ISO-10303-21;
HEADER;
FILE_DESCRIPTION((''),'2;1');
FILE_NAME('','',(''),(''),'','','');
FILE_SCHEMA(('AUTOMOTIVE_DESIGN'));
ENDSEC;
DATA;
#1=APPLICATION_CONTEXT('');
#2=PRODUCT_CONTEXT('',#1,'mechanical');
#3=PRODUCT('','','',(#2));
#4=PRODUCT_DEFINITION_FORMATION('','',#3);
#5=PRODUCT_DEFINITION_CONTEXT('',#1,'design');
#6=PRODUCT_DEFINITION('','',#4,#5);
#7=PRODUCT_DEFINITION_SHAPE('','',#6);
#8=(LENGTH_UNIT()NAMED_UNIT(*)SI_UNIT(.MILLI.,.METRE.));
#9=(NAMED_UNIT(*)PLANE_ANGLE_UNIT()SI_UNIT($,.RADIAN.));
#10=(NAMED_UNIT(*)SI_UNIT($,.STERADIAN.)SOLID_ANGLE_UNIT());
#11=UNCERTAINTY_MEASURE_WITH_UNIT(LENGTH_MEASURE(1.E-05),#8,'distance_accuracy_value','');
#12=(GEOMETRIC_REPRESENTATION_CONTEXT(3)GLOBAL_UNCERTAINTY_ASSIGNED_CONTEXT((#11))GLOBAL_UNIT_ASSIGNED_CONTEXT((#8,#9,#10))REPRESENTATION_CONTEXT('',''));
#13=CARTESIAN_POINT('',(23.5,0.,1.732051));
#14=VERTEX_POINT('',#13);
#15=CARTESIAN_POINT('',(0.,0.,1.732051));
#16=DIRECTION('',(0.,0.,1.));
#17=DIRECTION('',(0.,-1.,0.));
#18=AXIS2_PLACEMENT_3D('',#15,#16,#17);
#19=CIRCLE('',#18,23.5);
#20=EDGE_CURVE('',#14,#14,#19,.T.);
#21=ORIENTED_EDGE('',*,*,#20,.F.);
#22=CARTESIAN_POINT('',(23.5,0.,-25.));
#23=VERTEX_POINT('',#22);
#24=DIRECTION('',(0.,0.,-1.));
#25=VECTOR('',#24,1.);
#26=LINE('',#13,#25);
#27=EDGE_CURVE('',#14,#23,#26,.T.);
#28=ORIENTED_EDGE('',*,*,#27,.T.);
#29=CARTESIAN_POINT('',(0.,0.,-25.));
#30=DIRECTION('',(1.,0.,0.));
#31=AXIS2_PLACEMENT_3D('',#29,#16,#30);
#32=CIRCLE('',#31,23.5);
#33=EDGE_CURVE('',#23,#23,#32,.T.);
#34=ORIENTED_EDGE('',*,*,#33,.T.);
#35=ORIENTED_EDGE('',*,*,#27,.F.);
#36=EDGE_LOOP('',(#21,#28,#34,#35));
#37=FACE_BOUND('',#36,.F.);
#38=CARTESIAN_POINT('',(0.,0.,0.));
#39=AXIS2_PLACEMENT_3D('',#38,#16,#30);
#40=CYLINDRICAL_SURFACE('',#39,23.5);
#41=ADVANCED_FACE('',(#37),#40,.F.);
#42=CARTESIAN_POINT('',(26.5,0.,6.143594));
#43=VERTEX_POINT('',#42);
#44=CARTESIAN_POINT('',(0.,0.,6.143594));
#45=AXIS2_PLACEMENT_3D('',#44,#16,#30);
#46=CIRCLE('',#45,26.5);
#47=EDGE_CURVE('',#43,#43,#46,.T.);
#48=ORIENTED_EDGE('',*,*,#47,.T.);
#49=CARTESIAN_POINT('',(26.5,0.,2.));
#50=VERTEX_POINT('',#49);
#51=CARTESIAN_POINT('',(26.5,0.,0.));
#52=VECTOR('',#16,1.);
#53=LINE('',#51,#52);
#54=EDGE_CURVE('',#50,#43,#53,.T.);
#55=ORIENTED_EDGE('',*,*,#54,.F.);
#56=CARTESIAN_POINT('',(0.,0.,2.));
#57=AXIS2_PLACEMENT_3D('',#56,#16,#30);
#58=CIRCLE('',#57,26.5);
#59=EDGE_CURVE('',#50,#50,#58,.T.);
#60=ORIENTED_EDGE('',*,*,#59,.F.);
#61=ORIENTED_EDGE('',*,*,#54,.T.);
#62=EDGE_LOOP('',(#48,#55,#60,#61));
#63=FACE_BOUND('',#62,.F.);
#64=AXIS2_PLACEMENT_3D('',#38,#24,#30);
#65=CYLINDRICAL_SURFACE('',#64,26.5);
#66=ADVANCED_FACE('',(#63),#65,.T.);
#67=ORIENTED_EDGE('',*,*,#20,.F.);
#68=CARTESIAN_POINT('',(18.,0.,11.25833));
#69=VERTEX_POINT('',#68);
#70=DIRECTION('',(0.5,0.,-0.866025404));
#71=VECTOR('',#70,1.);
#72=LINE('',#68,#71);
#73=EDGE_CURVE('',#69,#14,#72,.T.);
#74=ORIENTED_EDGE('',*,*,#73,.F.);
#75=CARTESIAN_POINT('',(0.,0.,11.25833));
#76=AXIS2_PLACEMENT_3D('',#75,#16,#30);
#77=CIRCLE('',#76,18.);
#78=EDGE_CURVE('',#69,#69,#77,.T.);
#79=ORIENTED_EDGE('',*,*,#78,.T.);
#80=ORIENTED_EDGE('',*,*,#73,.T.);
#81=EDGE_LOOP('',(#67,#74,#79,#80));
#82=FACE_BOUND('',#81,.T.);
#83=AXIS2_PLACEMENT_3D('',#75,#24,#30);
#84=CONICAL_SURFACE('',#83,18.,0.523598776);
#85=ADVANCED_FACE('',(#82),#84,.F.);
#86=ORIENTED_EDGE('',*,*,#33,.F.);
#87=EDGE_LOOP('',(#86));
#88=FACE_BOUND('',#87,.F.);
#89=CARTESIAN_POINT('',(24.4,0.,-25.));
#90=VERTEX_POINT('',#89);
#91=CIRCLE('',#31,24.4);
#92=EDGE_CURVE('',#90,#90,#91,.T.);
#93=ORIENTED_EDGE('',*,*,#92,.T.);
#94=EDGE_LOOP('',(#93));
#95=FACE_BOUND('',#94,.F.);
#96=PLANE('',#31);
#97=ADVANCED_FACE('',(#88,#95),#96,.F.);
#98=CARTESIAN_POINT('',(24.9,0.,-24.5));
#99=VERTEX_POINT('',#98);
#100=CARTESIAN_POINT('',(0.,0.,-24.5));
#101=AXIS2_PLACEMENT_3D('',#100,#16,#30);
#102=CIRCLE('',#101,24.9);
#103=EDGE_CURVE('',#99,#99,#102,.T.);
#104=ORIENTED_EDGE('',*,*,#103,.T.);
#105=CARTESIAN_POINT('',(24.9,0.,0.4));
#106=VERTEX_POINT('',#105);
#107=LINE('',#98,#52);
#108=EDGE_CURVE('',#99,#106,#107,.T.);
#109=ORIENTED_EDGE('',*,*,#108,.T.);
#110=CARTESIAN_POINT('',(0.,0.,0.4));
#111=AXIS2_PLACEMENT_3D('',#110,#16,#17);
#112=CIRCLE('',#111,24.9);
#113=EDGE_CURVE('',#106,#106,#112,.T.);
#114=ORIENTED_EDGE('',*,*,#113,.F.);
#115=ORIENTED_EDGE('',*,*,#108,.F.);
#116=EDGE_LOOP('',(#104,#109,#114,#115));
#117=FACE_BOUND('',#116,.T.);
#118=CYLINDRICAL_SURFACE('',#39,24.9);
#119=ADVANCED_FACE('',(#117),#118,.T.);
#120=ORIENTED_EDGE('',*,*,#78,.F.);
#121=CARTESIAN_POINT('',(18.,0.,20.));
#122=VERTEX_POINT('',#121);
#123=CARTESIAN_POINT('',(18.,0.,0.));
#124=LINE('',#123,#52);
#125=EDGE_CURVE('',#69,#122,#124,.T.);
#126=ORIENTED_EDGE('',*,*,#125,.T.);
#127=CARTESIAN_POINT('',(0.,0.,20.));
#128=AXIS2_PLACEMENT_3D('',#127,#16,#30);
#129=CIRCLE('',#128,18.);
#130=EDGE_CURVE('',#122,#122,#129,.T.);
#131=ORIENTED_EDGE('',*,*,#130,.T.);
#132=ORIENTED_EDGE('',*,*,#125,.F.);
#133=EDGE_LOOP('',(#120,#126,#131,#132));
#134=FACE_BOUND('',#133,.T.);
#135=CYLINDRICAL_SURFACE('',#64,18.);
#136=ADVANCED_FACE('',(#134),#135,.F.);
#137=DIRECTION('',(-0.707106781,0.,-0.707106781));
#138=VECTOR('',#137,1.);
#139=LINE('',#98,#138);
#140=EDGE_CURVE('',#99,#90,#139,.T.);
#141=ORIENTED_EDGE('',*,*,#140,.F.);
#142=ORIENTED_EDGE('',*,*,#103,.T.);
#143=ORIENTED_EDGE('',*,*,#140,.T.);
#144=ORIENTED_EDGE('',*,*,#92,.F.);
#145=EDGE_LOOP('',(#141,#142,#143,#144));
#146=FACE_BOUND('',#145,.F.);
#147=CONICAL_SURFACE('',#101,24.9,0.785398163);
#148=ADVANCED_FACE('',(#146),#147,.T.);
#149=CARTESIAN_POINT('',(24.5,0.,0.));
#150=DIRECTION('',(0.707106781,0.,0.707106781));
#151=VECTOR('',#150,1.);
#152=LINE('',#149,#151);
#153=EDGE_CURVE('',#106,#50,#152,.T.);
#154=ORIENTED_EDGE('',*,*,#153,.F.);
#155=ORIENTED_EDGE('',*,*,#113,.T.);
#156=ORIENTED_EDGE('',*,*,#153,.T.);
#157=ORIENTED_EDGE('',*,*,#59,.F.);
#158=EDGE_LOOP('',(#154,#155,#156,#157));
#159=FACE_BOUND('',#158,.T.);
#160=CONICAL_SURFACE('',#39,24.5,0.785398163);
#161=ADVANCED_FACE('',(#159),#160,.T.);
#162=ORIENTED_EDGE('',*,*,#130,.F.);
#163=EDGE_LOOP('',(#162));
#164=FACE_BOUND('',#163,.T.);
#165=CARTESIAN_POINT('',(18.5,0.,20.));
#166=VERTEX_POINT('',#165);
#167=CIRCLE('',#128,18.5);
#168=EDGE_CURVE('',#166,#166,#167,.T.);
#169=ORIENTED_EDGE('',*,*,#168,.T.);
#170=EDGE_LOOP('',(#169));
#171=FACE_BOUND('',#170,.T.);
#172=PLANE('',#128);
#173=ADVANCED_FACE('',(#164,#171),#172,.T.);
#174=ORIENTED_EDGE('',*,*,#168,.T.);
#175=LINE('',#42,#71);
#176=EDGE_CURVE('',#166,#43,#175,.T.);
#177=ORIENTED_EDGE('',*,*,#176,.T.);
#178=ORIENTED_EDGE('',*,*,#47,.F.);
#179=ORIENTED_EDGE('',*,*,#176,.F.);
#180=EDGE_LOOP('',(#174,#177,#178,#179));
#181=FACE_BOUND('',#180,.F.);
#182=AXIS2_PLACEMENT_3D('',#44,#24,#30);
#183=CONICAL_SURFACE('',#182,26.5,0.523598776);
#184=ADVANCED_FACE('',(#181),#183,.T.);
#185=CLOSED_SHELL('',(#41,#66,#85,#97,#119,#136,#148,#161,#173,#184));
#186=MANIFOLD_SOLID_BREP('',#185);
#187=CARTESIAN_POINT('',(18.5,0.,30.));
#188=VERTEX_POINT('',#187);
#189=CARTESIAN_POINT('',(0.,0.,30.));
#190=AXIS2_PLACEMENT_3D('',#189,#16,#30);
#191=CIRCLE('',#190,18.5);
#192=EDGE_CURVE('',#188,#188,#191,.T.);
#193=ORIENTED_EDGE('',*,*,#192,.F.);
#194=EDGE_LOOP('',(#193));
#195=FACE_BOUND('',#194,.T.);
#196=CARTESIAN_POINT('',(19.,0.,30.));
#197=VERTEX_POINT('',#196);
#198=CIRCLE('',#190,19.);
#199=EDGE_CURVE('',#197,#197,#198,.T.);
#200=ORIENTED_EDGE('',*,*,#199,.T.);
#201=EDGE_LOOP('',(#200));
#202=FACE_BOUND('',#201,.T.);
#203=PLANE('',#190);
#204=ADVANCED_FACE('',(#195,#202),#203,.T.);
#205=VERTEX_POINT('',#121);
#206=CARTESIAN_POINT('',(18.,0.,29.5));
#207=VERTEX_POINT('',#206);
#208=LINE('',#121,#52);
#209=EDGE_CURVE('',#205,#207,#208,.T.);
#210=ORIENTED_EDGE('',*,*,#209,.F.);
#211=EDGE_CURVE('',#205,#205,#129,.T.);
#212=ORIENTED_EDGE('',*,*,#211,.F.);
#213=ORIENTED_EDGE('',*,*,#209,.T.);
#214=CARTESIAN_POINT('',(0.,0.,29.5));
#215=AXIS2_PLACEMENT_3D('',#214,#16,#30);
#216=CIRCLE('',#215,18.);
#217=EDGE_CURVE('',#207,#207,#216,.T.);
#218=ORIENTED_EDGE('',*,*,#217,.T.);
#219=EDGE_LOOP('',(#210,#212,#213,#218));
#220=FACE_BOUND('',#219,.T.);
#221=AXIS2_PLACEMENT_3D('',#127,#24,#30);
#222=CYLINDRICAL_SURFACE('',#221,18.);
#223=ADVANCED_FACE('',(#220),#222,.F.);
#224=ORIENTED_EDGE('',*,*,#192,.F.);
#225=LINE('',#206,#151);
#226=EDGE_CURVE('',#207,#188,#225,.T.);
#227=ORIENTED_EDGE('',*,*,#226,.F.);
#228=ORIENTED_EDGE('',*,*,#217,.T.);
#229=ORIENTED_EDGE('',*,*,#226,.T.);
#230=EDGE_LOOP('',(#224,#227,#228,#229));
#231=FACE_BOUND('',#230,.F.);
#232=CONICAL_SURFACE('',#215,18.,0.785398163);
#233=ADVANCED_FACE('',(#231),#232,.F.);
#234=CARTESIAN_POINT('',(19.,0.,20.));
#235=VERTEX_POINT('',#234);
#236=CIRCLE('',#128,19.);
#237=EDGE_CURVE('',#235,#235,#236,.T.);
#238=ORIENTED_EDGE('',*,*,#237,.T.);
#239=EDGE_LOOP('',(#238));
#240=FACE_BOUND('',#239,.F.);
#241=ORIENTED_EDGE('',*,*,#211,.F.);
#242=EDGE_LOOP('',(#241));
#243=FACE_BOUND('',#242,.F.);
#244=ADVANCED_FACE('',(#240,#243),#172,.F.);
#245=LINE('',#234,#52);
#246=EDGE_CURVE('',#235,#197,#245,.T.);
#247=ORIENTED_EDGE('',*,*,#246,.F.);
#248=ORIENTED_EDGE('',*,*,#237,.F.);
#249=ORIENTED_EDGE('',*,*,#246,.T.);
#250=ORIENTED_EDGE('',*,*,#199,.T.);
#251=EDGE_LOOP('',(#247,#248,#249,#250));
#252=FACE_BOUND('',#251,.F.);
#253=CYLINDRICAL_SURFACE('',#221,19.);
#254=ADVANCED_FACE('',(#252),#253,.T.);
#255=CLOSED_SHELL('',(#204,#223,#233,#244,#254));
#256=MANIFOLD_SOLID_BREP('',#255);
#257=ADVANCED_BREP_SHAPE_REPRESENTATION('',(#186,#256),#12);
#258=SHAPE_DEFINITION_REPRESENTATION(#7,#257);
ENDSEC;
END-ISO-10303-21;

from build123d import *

# Parameters (mm, degrees)
F0_R        = 26.5
F0_R_2      = 24.9
F0_R_3      = 23.5
F0_R_4      = 19
F0_R_5      = 18
F1_DEPTH    = 20
F2_DEPTH    = 25
F3_START    = 20
F3_DEPTH    = 10
F4_SIZE2    = 13.8564064606
F4_SIZE     = 8
F5_SIZE     = 0.5
F6_SIZE     = 0.5
F7_S5_R     = 24.9
F7_T6_DEPTH = 39
F8_S5_R     = 23.5
F8_T6_DEPTH = 37


# Not quite as in the source:
# - a fillet or chamfer that OpenCascade refuses, or shapes differently, is made with other operations: its cross-section is extruded or revolved along the edge and cut away or added


with BuildPart() as f1:
    # F0 (on Top) → F1 (new body)
    with BuildSketch(Plane.XY):
        Circle(F0_R)
        Circle(F0_R_2, mode=Mode.SUBTRACT)
        Circle(F0_R_2)
        Circle(F0_R_3, mode=Mode.SUBTRACT)
        Circle(F0_R_3)
        Circle(F0_R_4, mode=Mode.SUBTRACT)
        Circle(F0_R_4)
        Circle(F0_R_5, mode=Mode.SUBTRACT)
    extrude(amount=F1_DEPTH)

    # F0 (on Top) → F2 (join)
    with BuildSketch(Plane.XY):
        Circle(F0_R_2)
        Circle(F0_R_3, mode=Mode.SUBTRACT)
    extrude(amount=-F2_DEPTH)

    # F4
    f4_edges = [f1.edges().sort_by_distance(p)[0] for p in [
        (-26.5, 0, 20),
    ]]
    f4_side = f1.faces().sort_by_distance((-25.750467, 0, 20))[0]
    chamfer(f4_edges, length=F4_SIZE, length2=F4_SIZE2, reference=f4_side)

    # F6
    f6_edges = [f1.edges().sort_by_distance(p)[0] for p in [
        (-24.9, 0, -25),
    ]]
    chamfer(f6_edges, length=F6_SIZE)

    # F7: chamfer of 2 on 1 edges, made by hand


with BuildPart() as f3:
    # F0 (on Top) → F3 (new body)
    with BuildSketch(Plane.XY.offset(F3_START)):
        Circle(F0_R_4)
        Circle(F0_R_5, mode=Mode.SUBTRACT)
    extrude(amount=F3_DEPTH)

    # F5
    f5_edges = [f3.edges().sort_by_distance(p)[0] for p in [
        (-18, 0, 30),
    ]]
    chamfer(f5_edges, length=F5_SIZE)


with BuildPart() as f7_tool2:
    # F7_s3 → F7_t4 (revolve)
    with BuildSketch(Plane.XZ):
        Polygon((24.5, 0), (26.5, 2), (26.5, 0), align=None)
    revolve(axis=Axis((0, 0, 0), (0, 0, 1)))

    # F7_s5 → F7_t6 (cut, symmetric)
    with BuildSketch(Plane.XY.offset(1)):
        Circle(F7_S5_R)
    extrude(amount=F7_T6_DEPTH, both=True, mode=Mode.SUBTRACT)


with BuildPart() as f1_1:
    add(f1.part)

    # F7_t1: cut F7_tool2
    add(f7_tool2.part, mode=Mode.SUBTRACT)

    # F8: chamfer of 6.5 x 11.2583302492 on 1 edges, made by hand


with BuildPart() as f8_tool2:
    # F8_s3 → F8_t4 (revolve)
    with BuildSketch(Plane.XZ):
        Polygon((18, 11.2583302492), (24.5, 0), (18, 0), align=None)
    revolve(axis=Axis((0, 0, 0), (0, 0, 1)))

    # F8_s5 → F8_t6 (intersect, symmetric)
    with BuildSketch(Plane.XY.offset(5.6)):
        Circle(F8_S5_R)
    extrude(amount=F8_T6_DEPTH, both=True, mode=Mode.INTERSECT)


with BuildPart() as f1_2:
    add(f1_1.part)

    # F8_t1: cut F8_tool2
    add(f8_tool2.part, mode=Mode.SUBTRACT)


solid = Compound([f3.part, f1_2.part])
